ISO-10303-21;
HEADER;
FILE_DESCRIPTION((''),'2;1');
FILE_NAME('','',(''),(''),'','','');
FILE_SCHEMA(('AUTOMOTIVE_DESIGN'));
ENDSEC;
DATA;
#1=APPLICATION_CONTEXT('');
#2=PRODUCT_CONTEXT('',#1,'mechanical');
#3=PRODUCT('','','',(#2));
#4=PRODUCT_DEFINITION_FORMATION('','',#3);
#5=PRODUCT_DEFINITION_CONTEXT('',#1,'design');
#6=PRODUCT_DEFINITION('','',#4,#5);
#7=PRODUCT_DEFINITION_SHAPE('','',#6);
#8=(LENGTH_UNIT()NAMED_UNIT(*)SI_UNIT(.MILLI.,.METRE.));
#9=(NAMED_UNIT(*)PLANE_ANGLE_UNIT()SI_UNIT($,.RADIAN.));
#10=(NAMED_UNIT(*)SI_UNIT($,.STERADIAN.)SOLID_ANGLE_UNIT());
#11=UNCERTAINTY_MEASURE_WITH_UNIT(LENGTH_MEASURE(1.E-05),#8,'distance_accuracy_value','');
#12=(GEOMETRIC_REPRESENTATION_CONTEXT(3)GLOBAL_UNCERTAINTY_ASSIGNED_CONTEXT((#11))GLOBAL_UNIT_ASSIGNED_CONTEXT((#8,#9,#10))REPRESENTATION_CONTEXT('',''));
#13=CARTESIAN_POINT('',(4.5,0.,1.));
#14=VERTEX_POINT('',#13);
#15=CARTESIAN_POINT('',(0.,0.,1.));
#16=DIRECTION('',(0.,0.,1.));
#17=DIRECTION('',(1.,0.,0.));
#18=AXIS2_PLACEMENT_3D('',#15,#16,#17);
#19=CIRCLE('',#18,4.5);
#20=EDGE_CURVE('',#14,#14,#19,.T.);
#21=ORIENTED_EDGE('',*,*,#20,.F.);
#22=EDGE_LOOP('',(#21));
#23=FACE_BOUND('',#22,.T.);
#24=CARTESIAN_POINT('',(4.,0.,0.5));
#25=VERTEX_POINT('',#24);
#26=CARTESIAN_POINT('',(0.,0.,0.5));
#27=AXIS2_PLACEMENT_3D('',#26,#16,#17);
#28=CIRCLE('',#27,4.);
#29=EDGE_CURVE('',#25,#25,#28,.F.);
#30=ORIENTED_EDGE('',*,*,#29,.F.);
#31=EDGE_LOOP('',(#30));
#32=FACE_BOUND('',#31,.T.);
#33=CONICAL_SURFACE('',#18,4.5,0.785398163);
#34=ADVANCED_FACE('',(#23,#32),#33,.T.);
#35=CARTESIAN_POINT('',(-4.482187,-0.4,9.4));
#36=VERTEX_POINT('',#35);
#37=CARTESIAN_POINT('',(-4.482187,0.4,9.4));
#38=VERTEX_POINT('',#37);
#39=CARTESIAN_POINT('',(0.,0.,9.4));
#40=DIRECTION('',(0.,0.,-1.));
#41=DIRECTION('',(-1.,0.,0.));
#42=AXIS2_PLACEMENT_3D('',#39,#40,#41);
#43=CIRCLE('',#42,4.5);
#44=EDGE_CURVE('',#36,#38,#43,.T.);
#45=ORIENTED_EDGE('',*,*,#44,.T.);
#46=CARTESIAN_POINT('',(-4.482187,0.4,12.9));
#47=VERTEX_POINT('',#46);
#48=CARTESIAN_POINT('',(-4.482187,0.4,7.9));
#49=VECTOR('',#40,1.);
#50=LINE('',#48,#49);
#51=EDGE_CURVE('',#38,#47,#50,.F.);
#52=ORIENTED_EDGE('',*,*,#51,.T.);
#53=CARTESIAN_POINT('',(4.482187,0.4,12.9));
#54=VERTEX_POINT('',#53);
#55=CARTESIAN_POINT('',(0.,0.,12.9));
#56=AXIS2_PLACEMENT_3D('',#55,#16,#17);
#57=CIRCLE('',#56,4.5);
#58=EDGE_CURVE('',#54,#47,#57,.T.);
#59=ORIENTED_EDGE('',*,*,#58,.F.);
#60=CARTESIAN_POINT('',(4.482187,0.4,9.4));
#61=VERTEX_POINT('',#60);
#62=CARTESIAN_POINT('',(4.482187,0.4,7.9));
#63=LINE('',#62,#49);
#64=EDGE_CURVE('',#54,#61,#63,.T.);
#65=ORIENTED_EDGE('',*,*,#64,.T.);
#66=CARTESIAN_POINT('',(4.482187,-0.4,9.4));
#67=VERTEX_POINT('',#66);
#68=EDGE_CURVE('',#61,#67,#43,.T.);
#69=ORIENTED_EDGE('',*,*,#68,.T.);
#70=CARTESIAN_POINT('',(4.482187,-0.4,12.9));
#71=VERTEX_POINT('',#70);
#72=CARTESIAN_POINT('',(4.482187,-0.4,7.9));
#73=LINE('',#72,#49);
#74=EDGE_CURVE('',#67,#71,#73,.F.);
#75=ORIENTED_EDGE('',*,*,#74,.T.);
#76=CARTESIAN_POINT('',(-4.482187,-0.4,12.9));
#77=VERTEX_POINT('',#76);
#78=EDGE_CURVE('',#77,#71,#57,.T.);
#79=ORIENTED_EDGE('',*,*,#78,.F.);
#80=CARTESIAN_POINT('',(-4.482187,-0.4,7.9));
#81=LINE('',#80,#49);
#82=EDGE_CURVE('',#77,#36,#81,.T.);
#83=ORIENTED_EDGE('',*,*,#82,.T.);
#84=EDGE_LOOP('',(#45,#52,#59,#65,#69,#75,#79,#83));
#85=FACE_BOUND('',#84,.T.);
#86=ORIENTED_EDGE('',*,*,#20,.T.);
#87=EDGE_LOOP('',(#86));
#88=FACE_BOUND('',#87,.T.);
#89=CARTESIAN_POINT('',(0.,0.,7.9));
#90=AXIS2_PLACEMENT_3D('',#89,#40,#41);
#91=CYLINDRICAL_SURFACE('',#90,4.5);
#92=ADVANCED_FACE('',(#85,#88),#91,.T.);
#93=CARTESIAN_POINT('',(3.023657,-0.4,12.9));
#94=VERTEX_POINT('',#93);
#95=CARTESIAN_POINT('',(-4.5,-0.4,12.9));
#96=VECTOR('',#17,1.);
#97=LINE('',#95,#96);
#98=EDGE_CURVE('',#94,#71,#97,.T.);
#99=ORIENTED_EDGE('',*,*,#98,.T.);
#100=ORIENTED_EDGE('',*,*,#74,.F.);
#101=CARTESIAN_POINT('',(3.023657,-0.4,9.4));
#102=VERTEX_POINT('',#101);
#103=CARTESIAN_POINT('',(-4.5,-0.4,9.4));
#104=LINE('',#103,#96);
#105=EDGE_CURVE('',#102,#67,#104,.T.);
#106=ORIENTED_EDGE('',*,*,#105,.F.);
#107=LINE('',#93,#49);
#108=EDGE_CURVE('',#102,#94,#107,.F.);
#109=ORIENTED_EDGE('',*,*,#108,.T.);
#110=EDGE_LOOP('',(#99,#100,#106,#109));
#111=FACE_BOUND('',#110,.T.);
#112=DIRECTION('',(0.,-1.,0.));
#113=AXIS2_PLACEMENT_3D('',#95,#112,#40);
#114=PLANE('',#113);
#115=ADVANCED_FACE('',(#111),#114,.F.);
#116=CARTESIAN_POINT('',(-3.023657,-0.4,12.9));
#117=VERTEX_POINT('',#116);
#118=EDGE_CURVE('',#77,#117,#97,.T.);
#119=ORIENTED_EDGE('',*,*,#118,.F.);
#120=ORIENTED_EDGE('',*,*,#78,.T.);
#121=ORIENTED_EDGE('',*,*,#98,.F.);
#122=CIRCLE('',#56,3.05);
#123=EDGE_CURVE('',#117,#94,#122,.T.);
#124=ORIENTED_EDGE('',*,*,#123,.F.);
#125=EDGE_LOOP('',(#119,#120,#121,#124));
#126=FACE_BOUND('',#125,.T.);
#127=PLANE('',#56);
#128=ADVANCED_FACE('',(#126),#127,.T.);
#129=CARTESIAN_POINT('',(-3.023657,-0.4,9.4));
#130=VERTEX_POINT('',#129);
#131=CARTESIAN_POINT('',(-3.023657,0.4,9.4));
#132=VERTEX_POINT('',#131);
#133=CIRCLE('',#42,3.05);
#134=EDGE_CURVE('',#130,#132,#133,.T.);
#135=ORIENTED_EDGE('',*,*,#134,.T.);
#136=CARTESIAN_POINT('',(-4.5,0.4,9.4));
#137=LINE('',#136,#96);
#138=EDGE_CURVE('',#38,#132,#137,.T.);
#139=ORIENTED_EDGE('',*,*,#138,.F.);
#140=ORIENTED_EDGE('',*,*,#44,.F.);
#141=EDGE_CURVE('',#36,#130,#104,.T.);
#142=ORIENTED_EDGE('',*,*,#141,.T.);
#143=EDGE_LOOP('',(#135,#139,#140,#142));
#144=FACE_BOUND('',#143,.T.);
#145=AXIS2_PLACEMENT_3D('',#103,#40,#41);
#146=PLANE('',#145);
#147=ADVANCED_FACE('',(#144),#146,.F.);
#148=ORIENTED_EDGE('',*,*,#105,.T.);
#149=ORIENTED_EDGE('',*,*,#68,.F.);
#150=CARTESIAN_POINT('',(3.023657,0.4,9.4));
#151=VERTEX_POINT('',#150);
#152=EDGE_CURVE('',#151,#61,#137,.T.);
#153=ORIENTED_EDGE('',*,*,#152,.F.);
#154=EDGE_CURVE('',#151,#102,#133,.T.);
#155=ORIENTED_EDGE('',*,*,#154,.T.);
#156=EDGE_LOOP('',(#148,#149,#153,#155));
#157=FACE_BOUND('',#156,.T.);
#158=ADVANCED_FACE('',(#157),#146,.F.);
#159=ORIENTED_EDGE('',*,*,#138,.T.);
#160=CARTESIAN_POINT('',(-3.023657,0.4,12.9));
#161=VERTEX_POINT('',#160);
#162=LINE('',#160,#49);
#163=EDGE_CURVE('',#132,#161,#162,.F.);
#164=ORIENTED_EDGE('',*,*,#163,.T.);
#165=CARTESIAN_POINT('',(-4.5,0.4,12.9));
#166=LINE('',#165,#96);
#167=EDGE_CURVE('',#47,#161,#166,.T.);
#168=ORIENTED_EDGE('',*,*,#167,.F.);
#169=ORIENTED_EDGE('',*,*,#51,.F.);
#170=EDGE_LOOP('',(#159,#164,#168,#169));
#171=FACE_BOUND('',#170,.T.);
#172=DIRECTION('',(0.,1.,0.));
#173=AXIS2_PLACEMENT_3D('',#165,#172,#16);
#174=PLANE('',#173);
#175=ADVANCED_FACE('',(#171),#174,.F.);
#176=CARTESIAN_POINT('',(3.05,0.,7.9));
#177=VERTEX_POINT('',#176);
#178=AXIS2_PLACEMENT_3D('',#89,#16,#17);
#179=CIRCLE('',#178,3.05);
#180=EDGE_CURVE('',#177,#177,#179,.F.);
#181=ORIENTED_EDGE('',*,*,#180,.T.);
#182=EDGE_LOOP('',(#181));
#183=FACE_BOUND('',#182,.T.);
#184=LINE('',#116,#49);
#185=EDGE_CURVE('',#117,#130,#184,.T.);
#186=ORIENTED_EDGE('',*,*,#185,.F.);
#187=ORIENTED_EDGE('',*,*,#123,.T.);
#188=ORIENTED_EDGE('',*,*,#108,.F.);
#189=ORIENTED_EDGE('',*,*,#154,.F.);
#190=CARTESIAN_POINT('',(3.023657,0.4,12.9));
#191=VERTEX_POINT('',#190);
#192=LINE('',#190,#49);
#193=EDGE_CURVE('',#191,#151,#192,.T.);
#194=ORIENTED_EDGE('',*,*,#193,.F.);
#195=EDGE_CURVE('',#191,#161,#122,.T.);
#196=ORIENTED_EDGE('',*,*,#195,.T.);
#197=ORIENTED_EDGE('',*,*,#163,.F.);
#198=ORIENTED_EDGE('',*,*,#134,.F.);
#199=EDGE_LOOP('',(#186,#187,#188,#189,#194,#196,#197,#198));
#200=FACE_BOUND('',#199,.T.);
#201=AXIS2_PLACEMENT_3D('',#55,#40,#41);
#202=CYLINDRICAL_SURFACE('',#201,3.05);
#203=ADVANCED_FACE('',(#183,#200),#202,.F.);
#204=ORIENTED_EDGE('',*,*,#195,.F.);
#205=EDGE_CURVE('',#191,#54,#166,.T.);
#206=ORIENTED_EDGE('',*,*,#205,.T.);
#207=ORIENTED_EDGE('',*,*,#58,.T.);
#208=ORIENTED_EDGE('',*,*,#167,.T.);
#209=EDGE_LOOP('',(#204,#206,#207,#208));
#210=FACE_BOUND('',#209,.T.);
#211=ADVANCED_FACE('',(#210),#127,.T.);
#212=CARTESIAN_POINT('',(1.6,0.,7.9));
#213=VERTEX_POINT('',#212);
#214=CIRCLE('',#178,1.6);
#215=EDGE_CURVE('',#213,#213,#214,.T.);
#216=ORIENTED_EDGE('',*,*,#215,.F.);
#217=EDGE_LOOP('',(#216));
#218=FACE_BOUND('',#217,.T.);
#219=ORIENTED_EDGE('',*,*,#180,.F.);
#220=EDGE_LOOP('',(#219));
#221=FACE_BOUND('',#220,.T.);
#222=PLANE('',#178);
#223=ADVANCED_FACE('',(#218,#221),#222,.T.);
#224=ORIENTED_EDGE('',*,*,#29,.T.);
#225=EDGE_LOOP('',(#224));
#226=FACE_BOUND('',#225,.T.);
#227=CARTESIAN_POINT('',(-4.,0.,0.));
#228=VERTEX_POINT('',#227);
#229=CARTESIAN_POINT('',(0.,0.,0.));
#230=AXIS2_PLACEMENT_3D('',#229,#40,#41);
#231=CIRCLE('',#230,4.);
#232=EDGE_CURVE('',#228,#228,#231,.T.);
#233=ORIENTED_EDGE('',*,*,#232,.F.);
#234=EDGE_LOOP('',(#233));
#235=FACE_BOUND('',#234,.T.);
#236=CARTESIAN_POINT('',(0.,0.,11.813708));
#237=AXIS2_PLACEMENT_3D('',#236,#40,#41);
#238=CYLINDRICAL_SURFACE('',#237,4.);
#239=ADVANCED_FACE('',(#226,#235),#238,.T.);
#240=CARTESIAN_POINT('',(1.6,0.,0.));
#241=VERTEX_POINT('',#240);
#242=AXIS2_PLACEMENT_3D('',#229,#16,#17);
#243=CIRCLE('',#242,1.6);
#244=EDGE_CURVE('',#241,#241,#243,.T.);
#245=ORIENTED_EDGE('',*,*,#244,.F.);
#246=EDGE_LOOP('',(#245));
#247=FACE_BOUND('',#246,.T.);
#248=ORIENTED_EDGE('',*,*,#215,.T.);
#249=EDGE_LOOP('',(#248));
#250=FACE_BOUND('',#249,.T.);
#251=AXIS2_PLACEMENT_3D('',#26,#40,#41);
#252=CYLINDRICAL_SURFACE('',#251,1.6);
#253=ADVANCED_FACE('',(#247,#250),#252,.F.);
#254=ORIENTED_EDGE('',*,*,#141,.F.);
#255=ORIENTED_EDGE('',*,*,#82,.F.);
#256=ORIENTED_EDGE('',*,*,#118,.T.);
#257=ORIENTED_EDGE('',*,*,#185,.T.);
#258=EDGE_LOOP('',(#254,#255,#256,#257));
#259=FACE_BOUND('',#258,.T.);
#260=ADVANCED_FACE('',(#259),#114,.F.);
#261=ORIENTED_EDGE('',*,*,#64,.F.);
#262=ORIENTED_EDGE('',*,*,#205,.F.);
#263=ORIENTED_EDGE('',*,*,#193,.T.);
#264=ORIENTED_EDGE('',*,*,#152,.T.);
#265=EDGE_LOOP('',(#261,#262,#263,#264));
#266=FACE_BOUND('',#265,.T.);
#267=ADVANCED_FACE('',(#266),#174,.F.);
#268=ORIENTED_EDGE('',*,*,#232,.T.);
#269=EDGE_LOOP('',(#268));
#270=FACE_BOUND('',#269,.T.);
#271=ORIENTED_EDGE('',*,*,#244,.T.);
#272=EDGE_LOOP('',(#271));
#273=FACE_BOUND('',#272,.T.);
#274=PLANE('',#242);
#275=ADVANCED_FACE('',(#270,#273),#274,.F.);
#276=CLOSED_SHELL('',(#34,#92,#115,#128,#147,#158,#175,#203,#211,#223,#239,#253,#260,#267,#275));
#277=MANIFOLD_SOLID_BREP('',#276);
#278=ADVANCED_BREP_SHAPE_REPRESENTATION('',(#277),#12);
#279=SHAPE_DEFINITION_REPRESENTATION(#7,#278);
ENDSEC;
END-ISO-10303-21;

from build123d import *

# Parameters (mm, degrees)
SKETCH1_R                 = 2.75
SKETCH1_R_2               = 1.6
BOSS_EXTRUDE1_DEPTH       = 0.5
SKETCH2_R                 = 4.5
SKETCH2_R_2               = 1.6
BOSS_EXTRUDE2_DEPTH       = 7.4
CHAMFER1_SIZE             = 0.5
SKETCH3_R                 = 4.5
SKETCH3_R_2               = 2.5
BOSS_EXTRUDE3_DEPTH       = 2.2
SKETCH4_R                 = 4.5
SKETCH4_R_2               = 3.05
BOSS_EXTRUDE4_DEPTH       = 2.8
SKETCH5_W                 = 0.8
SKETCH5_H                 = 3.5
CUT_EXTRUDE1_DEPTH        = 4.5
BOSS_EXTRUDE6_START       = -0.5
BOSS_EXTRUDE6_OUTLINE_R   = 4
BOSS_EXTRUDE6_OUTLINE_R_2 = 2.75
BOSS_EXTRUDE6_DEPTH       = 0.5
CUT_EXTRUDE2_START        = -2.2
SKETCH7_R                 = 3.05
CUT_EXTRUDE2_DEPTH        = 2.2


# Read off the part's stored shape, not the designer's step: Boss-Extrude6
with BuildPart() as part:
    # Sketch1 → Boss-Extrude1 (new body)
    with BuildSketch(Plane(origin=(0, 0, 0), x_dir=(0, 1, 0), z_dir=(0, 0, 1))):
        with Locations(Location((0, 0, 0), (0, 0, 270))):
            Circle(SKETCH1_R)
        with Locations(Location((0, 0, 0), (0, 0, 270))):
            Circle(SKETCH1_R_2, mode=Mode.SUBTRACT)
    extrude(amount=BOSS_EXTRUDE1_DEPTH)

    # Sketch2 → Boss-Extrude2 (add)
    with BuildSketch(Plane.XY.offset(0.5)):
        Circle(SKETCH2_R)
        Circle(SKETCH2_R_2, mode=Mode.SUBTRACT)
    extrude(amount=BOSS_EXTRUDE2_DEPTH)

    # Chamfer1
    chamfer1_edges = [part.edges().sort_by_distance(p)[0] for p in [
        (-4.5, 0, 0.5),
    ]]
    chamfer(chamfer1_edges, length=CHAMFER1_SIZE)

    # Sketch3 → Boss-Extrude3 (add)
    with BuildSketch(Plane.XY.offset(7.9)):
        Circle(SKETCH3_R)
        Circle(SKETCH3_R_2, mode=Mode.SUBTRACT)
    extrude(amount=BOSS_EXTRUDE3_DEPTH)

    # Sketch4 → Boss-Extrude4 (add)
    with BuildSketch(Plane.XY.offset(10.1)):
        Circle(SKETCH4_R)
        Circle(SKETCH4_R_2, mode=Mode.SUBTRACT)
    extrude(amount=BOSS_EXTRUDE4_DEPTH)

    # Sketch5 → Cut-Extrude1 (cut, symmetric)
    with BuildSketch(Plane.YZ):
        with Locations((0, 11.15)):
            Rectangle(SKETCH5_W, SKETCH5_H)
    extrude(amount=CUT_EXTRUDE1_DEPTH, both=True, mode=Mode.SUBTRACT)

    # Boss-Extrude6 outline → Boss-Extrude6 (add)
    with BuildSketch(Plane(origin=(0, 0, 0), x_dir=(1, 0, 0), z_dir=(0, 0, -1)).offset(BOSS_EXTRUDE6_START)):
        Circle(BOSS_EXTRUDE6_OUTLINE_R)
        Circle(BOSS_EXTRUDE6_OUTLINE_R_2, mode=Mode.SUBTRACT)
    extrude(amount=BOSS_EXTRUDE6_DEPTH)

    # Sketch7 → Cut-Extrude2 (cut)
    with BuildSketch(Plane.XY.offset(10.1).offset(CUT_EXTRUDE2_START)):
        with Locations(Location((0, 0, 0), (0, 0, 187.535909342))):
            Circle(SKETCH7_R)
    extrude(amount=CUT_EXTRUDE2_DEPTH, mode=Mode.SUBTRACT)


solid = part.part
